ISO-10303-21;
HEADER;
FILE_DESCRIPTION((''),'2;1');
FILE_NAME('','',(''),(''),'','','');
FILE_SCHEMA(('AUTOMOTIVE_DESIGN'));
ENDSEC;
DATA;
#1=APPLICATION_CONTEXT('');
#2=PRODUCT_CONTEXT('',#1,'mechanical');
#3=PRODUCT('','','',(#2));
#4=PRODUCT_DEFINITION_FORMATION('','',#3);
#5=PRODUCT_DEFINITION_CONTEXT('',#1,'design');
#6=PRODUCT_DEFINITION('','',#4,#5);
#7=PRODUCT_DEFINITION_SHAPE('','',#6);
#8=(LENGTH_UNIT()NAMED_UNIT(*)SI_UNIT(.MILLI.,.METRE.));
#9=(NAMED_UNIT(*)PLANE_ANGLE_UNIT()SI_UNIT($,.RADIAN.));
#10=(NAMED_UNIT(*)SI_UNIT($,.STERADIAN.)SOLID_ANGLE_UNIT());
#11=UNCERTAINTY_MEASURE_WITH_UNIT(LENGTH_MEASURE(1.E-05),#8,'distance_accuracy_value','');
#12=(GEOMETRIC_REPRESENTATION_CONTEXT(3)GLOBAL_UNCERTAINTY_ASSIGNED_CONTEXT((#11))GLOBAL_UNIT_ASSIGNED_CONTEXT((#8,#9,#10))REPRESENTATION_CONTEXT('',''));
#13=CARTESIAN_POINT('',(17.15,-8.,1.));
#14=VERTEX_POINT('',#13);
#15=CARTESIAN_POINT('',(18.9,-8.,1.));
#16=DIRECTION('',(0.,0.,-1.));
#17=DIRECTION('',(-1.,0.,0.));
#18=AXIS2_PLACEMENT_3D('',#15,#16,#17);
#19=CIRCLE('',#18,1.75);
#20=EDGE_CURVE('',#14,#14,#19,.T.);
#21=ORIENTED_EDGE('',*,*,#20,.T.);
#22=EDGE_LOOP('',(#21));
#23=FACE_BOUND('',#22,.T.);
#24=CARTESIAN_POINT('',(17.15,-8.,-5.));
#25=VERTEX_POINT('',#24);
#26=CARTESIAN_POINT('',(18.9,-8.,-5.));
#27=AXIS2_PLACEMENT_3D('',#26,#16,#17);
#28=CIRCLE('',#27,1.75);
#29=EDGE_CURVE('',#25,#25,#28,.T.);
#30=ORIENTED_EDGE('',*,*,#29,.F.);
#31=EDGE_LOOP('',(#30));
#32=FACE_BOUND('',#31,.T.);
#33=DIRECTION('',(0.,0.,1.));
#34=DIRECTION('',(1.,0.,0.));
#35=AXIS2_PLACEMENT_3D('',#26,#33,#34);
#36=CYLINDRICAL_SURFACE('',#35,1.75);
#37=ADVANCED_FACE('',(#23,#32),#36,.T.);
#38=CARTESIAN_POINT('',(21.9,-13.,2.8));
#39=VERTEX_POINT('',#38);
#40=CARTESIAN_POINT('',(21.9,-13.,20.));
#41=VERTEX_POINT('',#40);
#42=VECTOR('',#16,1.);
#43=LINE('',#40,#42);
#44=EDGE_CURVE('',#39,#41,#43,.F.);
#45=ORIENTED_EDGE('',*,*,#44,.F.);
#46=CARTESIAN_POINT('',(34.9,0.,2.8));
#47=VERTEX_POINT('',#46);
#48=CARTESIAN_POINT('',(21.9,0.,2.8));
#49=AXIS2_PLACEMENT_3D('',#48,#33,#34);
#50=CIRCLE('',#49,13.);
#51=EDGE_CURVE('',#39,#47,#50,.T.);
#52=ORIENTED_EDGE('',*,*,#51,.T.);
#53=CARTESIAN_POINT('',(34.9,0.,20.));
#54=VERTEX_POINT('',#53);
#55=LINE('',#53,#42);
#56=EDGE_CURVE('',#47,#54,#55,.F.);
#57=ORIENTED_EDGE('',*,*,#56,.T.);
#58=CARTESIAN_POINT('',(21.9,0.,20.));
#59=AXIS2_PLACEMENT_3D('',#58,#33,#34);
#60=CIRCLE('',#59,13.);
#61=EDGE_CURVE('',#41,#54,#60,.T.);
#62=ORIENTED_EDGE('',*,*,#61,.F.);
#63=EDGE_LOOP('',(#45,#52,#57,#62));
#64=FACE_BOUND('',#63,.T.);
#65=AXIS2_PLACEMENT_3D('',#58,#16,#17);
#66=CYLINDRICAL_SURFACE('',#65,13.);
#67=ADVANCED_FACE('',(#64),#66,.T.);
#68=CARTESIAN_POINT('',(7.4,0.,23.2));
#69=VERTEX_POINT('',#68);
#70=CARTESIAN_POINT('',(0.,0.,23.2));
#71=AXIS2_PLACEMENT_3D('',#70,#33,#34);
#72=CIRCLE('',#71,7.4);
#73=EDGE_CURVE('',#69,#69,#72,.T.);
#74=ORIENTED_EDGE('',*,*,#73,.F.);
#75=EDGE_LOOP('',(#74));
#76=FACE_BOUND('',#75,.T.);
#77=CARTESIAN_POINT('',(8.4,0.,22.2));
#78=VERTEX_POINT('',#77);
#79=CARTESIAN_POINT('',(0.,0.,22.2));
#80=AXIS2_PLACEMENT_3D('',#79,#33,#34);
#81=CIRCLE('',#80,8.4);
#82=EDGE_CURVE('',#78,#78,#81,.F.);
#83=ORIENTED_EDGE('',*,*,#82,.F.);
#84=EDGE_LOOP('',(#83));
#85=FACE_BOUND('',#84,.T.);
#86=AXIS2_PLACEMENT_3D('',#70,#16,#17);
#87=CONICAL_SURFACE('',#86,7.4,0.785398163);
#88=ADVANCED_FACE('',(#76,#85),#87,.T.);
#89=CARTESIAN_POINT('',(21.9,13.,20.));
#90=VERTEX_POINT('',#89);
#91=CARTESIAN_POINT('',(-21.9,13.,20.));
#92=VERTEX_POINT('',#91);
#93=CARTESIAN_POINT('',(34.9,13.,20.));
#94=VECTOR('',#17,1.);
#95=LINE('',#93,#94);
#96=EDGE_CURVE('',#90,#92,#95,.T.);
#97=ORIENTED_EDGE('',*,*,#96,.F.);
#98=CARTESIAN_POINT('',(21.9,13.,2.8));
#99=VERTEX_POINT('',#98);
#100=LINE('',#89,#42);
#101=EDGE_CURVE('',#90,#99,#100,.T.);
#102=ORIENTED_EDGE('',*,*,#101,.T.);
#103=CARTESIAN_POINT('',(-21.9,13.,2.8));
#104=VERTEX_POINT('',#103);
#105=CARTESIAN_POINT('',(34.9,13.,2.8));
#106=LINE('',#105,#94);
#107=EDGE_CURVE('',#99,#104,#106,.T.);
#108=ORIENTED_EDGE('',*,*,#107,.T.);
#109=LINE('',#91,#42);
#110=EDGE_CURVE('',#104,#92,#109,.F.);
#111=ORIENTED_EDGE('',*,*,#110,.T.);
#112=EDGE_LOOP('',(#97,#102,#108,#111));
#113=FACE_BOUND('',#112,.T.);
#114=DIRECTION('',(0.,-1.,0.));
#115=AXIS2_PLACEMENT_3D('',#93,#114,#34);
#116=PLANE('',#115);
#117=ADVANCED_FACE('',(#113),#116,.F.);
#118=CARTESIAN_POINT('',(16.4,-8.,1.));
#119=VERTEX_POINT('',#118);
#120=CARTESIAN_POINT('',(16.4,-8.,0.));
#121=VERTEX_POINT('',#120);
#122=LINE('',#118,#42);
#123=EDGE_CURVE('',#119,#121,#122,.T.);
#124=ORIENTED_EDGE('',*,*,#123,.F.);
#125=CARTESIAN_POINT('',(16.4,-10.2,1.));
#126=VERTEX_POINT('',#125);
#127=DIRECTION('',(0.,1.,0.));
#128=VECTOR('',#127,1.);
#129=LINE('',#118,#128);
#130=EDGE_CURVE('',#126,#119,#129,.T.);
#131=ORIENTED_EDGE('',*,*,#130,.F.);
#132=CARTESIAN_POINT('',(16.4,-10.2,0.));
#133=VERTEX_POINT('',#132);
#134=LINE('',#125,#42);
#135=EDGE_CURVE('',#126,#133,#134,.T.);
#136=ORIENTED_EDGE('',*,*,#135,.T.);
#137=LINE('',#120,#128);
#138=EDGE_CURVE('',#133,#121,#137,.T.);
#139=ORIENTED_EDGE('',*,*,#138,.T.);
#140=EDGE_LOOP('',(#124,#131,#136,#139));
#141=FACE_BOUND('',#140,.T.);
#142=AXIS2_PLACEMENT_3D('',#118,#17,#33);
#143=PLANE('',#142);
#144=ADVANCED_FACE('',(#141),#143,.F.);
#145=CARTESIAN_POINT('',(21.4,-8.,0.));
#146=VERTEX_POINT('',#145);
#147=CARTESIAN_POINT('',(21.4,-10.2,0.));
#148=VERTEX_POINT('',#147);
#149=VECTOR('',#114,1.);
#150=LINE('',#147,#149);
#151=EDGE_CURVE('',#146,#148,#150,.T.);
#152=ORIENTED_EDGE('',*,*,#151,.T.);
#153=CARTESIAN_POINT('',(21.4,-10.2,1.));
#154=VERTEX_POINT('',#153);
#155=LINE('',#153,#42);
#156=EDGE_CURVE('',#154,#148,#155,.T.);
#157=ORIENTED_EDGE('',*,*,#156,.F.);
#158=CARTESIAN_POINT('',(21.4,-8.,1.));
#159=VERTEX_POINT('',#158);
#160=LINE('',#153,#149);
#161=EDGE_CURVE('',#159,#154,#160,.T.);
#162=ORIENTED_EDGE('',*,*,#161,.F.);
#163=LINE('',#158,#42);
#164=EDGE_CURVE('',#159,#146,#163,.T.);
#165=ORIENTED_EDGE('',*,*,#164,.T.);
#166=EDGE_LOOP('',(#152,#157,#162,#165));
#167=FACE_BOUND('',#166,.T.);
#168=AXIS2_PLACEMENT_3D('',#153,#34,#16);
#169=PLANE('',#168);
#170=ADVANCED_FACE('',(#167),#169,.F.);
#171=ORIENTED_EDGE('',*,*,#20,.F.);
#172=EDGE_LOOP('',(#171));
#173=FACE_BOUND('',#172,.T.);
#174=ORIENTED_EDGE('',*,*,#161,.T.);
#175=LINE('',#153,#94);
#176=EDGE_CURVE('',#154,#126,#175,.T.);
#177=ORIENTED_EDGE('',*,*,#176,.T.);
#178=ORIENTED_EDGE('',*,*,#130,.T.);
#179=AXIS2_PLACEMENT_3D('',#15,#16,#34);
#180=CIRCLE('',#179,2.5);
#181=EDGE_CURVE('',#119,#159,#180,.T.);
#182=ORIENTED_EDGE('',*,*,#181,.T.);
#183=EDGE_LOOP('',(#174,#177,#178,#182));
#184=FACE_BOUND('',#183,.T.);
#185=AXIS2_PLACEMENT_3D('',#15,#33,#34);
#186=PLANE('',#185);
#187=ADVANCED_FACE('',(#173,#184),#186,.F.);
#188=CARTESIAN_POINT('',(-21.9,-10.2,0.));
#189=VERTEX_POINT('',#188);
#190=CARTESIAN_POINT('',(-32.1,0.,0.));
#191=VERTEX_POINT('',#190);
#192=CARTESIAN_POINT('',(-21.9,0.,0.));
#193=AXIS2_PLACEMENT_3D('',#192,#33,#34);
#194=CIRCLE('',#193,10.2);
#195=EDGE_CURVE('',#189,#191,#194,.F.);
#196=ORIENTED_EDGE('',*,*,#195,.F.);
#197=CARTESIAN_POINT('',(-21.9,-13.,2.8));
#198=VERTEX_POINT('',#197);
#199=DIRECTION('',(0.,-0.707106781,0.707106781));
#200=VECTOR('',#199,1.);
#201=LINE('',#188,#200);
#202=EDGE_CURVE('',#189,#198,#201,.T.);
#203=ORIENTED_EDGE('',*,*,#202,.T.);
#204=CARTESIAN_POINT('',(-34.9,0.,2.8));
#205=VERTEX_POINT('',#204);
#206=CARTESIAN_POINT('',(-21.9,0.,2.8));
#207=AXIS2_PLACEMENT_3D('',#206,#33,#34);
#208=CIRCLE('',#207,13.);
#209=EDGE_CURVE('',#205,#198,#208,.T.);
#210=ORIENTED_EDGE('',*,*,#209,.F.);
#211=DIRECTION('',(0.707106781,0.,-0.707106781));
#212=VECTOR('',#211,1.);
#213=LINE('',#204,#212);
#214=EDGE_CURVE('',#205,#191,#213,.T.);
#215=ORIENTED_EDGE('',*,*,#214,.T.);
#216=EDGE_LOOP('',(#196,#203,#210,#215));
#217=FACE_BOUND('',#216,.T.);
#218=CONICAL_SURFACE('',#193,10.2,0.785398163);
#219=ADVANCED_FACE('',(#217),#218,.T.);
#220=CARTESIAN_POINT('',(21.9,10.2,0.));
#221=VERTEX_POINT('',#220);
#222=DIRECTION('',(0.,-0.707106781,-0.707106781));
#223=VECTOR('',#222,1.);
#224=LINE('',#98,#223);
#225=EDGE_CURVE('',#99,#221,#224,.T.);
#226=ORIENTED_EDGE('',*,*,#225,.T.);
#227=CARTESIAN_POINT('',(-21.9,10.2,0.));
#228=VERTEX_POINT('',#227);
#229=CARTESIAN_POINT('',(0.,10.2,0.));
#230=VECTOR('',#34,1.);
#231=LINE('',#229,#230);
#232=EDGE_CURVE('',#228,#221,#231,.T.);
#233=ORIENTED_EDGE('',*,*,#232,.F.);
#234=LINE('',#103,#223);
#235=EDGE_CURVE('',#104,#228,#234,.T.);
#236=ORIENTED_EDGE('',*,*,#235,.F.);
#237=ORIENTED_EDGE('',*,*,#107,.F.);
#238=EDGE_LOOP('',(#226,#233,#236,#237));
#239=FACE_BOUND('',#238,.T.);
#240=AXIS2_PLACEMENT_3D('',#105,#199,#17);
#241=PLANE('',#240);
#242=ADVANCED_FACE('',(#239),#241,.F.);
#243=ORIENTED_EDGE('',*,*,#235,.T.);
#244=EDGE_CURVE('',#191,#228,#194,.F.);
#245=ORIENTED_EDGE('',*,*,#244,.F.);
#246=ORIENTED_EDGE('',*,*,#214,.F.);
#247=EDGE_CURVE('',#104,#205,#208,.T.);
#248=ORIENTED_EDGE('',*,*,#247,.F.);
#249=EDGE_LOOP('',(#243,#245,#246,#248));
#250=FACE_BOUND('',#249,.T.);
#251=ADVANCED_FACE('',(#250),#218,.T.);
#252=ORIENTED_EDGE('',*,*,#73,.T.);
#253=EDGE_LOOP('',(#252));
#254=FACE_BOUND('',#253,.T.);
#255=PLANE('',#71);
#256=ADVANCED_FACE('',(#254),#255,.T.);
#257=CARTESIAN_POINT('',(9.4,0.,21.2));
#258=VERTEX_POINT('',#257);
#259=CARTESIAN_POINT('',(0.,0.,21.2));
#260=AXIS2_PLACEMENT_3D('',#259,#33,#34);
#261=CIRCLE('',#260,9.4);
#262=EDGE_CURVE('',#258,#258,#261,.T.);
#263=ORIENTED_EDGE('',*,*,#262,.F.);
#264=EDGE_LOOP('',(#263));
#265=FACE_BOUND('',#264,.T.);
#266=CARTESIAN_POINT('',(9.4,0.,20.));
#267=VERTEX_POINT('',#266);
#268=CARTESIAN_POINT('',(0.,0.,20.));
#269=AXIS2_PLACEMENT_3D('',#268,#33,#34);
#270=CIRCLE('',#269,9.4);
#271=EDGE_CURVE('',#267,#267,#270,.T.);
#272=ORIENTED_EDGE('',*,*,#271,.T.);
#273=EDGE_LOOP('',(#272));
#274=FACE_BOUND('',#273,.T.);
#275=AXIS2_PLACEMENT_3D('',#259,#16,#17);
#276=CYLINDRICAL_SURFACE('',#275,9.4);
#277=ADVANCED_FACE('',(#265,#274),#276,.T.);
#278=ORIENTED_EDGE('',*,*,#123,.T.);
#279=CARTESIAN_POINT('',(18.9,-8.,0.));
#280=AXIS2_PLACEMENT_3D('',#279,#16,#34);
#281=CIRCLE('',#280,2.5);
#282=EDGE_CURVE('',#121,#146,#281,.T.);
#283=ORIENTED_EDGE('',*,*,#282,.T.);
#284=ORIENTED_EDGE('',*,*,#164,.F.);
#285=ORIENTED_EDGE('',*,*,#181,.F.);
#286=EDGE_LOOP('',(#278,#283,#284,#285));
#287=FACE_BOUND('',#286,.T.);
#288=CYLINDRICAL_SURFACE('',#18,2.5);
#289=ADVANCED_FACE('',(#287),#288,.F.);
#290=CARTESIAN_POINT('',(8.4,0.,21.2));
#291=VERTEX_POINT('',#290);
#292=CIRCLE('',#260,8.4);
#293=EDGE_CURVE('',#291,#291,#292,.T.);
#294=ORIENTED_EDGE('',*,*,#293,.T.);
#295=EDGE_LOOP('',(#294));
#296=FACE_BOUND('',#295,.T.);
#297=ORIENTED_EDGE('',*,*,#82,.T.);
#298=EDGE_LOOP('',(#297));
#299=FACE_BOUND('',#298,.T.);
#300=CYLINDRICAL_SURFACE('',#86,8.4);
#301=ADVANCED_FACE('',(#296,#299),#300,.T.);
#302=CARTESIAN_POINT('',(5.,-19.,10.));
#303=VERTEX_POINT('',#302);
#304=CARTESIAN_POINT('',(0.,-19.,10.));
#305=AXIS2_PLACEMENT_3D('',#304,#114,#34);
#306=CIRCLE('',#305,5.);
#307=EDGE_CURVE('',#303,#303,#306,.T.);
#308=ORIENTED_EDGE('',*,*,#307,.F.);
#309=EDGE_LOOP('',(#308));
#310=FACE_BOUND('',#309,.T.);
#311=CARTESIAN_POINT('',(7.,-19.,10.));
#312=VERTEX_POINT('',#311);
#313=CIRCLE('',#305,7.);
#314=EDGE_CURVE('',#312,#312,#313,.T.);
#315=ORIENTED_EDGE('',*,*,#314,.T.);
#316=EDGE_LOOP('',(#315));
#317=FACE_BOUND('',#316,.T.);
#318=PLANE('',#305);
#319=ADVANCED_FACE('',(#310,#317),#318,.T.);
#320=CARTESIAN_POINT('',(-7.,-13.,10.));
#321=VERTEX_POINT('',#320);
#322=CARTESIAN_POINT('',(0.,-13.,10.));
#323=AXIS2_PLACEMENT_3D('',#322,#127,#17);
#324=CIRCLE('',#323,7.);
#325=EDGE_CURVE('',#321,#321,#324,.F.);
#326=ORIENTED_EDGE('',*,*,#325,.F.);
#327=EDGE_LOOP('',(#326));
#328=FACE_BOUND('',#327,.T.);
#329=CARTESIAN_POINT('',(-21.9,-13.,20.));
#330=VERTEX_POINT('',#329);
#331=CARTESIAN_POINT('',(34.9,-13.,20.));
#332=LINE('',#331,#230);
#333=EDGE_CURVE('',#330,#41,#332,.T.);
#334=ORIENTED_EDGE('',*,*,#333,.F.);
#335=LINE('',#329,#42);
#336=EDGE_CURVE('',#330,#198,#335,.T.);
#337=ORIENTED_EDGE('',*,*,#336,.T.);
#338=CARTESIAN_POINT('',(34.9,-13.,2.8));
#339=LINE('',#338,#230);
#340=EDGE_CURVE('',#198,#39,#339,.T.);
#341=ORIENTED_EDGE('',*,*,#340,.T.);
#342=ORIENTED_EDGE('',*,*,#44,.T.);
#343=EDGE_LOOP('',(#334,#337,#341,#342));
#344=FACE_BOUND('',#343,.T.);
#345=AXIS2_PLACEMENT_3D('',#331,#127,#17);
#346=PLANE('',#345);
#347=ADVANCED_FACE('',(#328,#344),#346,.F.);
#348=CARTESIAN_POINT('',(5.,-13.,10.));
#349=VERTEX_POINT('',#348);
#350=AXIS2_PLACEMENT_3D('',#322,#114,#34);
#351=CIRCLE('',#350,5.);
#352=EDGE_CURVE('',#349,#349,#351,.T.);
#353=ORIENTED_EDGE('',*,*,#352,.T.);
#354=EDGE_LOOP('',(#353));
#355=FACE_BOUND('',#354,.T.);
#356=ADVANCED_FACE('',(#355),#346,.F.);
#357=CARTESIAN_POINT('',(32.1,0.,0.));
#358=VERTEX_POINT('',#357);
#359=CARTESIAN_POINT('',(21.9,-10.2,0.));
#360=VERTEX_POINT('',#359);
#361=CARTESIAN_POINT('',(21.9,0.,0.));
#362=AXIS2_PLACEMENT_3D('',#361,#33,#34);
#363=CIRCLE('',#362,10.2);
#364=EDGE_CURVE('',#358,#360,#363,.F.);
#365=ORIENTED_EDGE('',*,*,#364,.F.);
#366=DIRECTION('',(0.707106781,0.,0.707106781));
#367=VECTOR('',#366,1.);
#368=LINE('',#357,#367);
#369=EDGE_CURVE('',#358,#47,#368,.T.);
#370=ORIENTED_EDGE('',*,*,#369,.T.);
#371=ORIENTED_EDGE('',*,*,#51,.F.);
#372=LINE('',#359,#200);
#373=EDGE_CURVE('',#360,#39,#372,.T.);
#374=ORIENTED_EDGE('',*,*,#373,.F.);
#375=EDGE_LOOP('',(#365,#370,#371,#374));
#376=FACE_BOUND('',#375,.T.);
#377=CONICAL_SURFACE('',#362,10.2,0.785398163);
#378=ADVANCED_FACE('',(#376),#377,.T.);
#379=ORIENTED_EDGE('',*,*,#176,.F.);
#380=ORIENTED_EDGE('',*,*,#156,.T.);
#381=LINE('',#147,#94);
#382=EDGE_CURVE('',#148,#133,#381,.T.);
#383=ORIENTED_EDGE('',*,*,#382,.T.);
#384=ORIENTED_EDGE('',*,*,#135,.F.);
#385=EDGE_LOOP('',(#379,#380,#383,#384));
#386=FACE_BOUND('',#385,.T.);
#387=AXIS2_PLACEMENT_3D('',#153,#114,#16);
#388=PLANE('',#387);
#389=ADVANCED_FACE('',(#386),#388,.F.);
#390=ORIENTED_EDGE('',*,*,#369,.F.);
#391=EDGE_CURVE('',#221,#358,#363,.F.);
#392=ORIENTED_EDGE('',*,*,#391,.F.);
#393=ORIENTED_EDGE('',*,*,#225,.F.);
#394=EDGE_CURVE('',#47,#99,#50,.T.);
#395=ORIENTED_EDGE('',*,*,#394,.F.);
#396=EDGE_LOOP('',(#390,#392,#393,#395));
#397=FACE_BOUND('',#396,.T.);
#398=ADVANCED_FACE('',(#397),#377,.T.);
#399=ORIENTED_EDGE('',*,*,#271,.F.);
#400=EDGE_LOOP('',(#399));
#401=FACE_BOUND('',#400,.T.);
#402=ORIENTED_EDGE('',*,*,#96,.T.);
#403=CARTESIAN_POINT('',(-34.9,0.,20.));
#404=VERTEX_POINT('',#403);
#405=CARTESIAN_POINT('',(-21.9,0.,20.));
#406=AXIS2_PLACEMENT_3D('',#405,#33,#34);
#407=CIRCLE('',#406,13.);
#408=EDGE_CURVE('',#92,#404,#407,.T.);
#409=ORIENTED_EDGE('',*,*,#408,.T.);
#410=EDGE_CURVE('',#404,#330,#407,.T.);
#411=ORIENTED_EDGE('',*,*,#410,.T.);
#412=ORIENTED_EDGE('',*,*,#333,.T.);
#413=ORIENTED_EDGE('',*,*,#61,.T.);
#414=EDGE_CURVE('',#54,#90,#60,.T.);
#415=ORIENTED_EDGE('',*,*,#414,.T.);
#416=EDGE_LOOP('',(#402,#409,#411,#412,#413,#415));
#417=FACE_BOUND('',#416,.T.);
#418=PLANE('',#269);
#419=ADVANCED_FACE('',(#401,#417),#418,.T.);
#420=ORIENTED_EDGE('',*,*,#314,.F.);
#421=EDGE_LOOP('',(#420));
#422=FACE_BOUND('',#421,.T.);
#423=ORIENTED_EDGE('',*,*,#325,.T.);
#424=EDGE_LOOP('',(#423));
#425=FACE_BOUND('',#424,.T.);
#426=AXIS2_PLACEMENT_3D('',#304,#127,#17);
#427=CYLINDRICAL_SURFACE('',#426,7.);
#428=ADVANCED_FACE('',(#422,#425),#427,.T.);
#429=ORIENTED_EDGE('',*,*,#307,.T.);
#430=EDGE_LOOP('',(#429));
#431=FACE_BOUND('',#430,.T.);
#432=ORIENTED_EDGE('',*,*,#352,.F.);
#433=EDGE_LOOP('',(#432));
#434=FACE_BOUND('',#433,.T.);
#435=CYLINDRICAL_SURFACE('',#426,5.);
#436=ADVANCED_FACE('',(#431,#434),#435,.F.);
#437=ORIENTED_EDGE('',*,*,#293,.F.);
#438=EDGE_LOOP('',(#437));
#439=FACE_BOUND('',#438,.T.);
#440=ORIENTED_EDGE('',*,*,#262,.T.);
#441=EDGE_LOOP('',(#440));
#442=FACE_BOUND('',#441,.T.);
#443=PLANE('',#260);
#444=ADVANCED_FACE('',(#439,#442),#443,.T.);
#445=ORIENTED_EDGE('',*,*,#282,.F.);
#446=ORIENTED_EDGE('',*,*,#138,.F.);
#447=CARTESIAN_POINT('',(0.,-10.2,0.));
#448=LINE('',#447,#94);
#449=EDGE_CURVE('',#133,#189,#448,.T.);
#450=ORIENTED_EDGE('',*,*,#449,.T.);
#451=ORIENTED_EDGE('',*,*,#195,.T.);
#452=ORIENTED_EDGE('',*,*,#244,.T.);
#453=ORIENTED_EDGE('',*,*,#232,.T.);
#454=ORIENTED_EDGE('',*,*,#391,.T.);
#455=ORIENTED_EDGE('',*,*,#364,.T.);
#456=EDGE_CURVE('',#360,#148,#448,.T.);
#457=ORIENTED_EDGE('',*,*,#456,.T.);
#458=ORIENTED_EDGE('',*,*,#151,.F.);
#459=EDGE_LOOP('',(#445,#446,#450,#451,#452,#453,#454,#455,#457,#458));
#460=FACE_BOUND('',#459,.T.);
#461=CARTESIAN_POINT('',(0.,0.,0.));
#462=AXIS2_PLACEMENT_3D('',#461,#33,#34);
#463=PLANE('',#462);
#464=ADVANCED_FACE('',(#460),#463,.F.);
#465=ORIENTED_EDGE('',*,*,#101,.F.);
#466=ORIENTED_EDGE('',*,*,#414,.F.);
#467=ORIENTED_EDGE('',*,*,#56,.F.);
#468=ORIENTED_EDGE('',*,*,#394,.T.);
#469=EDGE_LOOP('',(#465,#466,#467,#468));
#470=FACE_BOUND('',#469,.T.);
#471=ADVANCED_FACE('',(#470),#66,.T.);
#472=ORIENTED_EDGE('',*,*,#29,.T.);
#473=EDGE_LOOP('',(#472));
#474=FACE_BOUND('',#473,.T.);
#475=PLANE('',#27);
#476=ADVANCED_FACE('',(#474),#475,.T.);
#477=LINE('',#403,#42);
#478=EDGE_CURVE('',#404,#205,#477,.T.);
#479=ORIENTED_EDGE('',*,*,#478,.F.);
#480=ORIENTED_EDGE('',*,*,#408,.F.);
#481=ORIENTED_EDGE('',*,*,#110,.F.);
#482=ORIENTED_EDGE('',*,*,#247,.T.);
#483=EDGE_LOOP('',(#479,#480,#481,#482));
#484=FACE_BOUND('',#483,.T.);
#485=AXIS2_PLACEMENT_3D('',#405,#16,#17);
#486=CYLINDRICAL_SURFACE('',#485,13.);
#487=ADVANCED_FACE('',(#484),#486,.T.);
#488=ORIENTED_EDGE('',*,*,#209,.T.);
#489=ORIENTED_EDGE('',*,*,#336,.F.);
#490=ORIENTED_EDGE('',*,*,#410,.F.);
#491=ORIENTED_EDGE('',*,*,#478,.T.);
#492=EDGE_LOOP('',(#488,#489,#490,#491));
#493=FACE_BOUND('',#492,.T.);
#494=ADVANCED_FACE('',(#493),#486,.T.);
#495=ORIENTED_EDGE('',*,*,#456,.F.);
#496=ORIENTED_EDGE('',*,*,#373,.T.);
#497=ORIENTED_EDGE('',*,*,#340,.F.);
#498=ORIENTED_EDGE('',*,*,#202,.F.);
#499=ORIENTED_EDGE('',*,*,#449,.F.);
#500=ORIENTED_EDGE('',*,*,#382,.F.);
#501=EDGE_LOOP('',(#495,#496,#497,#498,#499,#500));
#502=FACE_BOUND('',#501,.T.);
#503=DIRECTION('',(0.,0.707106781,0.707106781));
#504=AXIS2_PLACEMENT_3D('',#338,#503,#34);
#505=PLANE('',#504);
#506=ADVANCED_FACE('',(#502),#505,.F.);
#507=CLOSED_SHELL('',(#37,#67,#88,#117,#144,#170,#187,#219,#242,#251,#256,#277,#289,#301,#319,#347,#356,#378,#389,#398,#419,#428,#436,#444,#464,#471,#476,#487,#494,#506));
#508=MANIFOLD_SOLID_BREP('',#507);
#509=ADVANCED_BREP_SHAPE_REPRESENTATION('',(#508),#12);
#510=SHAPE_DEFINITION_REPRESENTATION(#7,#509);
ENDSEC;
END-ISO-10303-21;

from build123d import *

# Parameters (mm, degrees)
SKETCH1_W           = 69.8
SKETCH1_H           = 26
BOSS_EXTRUDE1_DEPTH = 20
FILLET1_R           = 13
SKETCH2_R           = 9.4
BOSS_EXTRUDE2_DEPTH = 1.2
SKETCH3_R           = 8.4
BOSS_EXTRUDE3_DEPTH = 2
CHAMFER1_SIZE       = 1
SKETCH4_R           = 7
SKETCH4_R_2         = 5
BOSS_EXTRUDE4_DEPTH = 6
SKETCH5_R           = 1.75
BOSS_EXTRUDE5_DEPTH = 5
CHAMFER2_SIZE       = 2.8
CUT_EXTRUDE1_START  = -1
SKETCH6_R           = 1.75
CUT_EXTRUDE1_DEPTH  = 1


with BuildPart() as part:
    # Sketch1 → Boss-Extrude1 (new body)
    with BuildSketch(Plane.XY):
        Rectangle(SKETCH1_W, SKETCH1_H)
    extrude(amount=BOSS_EXTRUDE1_DEPTH)

    # Fillet1
    fillet1_edges = [part.edges().sort_by_distance(p)[0] for p in [
        (-34.9, -13, 10),
        (-34.9, 13, 10),
        (34.9, -13, 10),
        (34.9, 13, 10),
    ]]
    fillet(fillet1_edges, radius=FILLET1_R - 0.0001)  # a hair under: the kernel refuses the full size

    # Sketch2 → Boss-Extrude2 (add)
    with BuildSketch(Plane.XY.offset(20)):
        Circle(SKETCH2_R)
    extrude(amount=BOSS_EXTRUDE2_DEPTH)

    # Sketch3 → Boss-Extrude3 (add)
    with BuildSketch(Plane.XY.offset(21.2)):
        Circle(SKETCH3_R)
    extrude(amount=BOSS_EXTRUDE3_DEPTH)

    # Chamfer1
    chamfer1_edges = [part.edges().sort_by_distance(p)[0] for p in [
        (-8.4, 0, 23.2),
    ]]
    chamfer(chamfer1_edges, length=CHAMFER1_SIZE)

    # Sketch4 → Boss-Extrude4 (add)
    with BuildSketch(Plane.XZ.offset(13)):
        with Locations(Location((0, 10, 0), (0, 0, 180))):
            Circle(SKETCH4_R)
        with Locations((0, 10)):
            Circle(SKETCH4_R_2, mode=Mode.SUBTRACT)
    extrude(amount=BOSS_EXTRUDE4_DEPTH)

    # Sketch5 → Boss-Extrude5 (add)
    with BuildSketch(Plane(origin=(0, 0, 0), x_dir=(-1, 0, 0), z_dir=(0, 0, -1))):
        with Locations(Location((-18.9, -8, 0), (0, 0, 180))):
            Circle(SKETCH5_R)
    extrude(amount=BOSS_EXTRUDE5_DEPTH)

    # Chamfer2
    chamfer2_edges = [part.edges().sort_by_distance(p)[0] for p in [
        (0, -13, 0),
        (0, 13, 0),
        (31.092417445, 9.192417445, 0),
        (31.092417445, -9.192417445, 0),
        (-31.092417445, 9.192417445, 0),
        (-31.092417445, -9.192417445, 0),
    ]]
    chamfer(chamfer2_edges, length=CHAMFER2_SIZE)

    # Sketch6 → Cut-Extrude1 (cut)
    with BuildSketch(Plane(origin=(0, 0, 0), x_dir=(-1, 0, 0), z_dir=(0, 0, -1)).offset(CUT_EXTRUDE1_START)):
        with BuildLine():
            Line((-21.4, -10.2), (-21.4, -8))
            ThreePointArc((-21.4, -8), (-18.9, -5.5), (-16.4, -8))
            Line((-16.4, -8), (-16.4, -10.2))
            Line((-16.4, -10.2), (-21.4, -10.2))
        make_face()
        with Locations((-18.9, -8)):
            Circle(SKETCH6_R, mode=Mode.SUBTRACT)
    extrude(amount=CUT_EXTRUDE1_DEPTH, mode=Mode.SUBTRACT)


solid = part.part
